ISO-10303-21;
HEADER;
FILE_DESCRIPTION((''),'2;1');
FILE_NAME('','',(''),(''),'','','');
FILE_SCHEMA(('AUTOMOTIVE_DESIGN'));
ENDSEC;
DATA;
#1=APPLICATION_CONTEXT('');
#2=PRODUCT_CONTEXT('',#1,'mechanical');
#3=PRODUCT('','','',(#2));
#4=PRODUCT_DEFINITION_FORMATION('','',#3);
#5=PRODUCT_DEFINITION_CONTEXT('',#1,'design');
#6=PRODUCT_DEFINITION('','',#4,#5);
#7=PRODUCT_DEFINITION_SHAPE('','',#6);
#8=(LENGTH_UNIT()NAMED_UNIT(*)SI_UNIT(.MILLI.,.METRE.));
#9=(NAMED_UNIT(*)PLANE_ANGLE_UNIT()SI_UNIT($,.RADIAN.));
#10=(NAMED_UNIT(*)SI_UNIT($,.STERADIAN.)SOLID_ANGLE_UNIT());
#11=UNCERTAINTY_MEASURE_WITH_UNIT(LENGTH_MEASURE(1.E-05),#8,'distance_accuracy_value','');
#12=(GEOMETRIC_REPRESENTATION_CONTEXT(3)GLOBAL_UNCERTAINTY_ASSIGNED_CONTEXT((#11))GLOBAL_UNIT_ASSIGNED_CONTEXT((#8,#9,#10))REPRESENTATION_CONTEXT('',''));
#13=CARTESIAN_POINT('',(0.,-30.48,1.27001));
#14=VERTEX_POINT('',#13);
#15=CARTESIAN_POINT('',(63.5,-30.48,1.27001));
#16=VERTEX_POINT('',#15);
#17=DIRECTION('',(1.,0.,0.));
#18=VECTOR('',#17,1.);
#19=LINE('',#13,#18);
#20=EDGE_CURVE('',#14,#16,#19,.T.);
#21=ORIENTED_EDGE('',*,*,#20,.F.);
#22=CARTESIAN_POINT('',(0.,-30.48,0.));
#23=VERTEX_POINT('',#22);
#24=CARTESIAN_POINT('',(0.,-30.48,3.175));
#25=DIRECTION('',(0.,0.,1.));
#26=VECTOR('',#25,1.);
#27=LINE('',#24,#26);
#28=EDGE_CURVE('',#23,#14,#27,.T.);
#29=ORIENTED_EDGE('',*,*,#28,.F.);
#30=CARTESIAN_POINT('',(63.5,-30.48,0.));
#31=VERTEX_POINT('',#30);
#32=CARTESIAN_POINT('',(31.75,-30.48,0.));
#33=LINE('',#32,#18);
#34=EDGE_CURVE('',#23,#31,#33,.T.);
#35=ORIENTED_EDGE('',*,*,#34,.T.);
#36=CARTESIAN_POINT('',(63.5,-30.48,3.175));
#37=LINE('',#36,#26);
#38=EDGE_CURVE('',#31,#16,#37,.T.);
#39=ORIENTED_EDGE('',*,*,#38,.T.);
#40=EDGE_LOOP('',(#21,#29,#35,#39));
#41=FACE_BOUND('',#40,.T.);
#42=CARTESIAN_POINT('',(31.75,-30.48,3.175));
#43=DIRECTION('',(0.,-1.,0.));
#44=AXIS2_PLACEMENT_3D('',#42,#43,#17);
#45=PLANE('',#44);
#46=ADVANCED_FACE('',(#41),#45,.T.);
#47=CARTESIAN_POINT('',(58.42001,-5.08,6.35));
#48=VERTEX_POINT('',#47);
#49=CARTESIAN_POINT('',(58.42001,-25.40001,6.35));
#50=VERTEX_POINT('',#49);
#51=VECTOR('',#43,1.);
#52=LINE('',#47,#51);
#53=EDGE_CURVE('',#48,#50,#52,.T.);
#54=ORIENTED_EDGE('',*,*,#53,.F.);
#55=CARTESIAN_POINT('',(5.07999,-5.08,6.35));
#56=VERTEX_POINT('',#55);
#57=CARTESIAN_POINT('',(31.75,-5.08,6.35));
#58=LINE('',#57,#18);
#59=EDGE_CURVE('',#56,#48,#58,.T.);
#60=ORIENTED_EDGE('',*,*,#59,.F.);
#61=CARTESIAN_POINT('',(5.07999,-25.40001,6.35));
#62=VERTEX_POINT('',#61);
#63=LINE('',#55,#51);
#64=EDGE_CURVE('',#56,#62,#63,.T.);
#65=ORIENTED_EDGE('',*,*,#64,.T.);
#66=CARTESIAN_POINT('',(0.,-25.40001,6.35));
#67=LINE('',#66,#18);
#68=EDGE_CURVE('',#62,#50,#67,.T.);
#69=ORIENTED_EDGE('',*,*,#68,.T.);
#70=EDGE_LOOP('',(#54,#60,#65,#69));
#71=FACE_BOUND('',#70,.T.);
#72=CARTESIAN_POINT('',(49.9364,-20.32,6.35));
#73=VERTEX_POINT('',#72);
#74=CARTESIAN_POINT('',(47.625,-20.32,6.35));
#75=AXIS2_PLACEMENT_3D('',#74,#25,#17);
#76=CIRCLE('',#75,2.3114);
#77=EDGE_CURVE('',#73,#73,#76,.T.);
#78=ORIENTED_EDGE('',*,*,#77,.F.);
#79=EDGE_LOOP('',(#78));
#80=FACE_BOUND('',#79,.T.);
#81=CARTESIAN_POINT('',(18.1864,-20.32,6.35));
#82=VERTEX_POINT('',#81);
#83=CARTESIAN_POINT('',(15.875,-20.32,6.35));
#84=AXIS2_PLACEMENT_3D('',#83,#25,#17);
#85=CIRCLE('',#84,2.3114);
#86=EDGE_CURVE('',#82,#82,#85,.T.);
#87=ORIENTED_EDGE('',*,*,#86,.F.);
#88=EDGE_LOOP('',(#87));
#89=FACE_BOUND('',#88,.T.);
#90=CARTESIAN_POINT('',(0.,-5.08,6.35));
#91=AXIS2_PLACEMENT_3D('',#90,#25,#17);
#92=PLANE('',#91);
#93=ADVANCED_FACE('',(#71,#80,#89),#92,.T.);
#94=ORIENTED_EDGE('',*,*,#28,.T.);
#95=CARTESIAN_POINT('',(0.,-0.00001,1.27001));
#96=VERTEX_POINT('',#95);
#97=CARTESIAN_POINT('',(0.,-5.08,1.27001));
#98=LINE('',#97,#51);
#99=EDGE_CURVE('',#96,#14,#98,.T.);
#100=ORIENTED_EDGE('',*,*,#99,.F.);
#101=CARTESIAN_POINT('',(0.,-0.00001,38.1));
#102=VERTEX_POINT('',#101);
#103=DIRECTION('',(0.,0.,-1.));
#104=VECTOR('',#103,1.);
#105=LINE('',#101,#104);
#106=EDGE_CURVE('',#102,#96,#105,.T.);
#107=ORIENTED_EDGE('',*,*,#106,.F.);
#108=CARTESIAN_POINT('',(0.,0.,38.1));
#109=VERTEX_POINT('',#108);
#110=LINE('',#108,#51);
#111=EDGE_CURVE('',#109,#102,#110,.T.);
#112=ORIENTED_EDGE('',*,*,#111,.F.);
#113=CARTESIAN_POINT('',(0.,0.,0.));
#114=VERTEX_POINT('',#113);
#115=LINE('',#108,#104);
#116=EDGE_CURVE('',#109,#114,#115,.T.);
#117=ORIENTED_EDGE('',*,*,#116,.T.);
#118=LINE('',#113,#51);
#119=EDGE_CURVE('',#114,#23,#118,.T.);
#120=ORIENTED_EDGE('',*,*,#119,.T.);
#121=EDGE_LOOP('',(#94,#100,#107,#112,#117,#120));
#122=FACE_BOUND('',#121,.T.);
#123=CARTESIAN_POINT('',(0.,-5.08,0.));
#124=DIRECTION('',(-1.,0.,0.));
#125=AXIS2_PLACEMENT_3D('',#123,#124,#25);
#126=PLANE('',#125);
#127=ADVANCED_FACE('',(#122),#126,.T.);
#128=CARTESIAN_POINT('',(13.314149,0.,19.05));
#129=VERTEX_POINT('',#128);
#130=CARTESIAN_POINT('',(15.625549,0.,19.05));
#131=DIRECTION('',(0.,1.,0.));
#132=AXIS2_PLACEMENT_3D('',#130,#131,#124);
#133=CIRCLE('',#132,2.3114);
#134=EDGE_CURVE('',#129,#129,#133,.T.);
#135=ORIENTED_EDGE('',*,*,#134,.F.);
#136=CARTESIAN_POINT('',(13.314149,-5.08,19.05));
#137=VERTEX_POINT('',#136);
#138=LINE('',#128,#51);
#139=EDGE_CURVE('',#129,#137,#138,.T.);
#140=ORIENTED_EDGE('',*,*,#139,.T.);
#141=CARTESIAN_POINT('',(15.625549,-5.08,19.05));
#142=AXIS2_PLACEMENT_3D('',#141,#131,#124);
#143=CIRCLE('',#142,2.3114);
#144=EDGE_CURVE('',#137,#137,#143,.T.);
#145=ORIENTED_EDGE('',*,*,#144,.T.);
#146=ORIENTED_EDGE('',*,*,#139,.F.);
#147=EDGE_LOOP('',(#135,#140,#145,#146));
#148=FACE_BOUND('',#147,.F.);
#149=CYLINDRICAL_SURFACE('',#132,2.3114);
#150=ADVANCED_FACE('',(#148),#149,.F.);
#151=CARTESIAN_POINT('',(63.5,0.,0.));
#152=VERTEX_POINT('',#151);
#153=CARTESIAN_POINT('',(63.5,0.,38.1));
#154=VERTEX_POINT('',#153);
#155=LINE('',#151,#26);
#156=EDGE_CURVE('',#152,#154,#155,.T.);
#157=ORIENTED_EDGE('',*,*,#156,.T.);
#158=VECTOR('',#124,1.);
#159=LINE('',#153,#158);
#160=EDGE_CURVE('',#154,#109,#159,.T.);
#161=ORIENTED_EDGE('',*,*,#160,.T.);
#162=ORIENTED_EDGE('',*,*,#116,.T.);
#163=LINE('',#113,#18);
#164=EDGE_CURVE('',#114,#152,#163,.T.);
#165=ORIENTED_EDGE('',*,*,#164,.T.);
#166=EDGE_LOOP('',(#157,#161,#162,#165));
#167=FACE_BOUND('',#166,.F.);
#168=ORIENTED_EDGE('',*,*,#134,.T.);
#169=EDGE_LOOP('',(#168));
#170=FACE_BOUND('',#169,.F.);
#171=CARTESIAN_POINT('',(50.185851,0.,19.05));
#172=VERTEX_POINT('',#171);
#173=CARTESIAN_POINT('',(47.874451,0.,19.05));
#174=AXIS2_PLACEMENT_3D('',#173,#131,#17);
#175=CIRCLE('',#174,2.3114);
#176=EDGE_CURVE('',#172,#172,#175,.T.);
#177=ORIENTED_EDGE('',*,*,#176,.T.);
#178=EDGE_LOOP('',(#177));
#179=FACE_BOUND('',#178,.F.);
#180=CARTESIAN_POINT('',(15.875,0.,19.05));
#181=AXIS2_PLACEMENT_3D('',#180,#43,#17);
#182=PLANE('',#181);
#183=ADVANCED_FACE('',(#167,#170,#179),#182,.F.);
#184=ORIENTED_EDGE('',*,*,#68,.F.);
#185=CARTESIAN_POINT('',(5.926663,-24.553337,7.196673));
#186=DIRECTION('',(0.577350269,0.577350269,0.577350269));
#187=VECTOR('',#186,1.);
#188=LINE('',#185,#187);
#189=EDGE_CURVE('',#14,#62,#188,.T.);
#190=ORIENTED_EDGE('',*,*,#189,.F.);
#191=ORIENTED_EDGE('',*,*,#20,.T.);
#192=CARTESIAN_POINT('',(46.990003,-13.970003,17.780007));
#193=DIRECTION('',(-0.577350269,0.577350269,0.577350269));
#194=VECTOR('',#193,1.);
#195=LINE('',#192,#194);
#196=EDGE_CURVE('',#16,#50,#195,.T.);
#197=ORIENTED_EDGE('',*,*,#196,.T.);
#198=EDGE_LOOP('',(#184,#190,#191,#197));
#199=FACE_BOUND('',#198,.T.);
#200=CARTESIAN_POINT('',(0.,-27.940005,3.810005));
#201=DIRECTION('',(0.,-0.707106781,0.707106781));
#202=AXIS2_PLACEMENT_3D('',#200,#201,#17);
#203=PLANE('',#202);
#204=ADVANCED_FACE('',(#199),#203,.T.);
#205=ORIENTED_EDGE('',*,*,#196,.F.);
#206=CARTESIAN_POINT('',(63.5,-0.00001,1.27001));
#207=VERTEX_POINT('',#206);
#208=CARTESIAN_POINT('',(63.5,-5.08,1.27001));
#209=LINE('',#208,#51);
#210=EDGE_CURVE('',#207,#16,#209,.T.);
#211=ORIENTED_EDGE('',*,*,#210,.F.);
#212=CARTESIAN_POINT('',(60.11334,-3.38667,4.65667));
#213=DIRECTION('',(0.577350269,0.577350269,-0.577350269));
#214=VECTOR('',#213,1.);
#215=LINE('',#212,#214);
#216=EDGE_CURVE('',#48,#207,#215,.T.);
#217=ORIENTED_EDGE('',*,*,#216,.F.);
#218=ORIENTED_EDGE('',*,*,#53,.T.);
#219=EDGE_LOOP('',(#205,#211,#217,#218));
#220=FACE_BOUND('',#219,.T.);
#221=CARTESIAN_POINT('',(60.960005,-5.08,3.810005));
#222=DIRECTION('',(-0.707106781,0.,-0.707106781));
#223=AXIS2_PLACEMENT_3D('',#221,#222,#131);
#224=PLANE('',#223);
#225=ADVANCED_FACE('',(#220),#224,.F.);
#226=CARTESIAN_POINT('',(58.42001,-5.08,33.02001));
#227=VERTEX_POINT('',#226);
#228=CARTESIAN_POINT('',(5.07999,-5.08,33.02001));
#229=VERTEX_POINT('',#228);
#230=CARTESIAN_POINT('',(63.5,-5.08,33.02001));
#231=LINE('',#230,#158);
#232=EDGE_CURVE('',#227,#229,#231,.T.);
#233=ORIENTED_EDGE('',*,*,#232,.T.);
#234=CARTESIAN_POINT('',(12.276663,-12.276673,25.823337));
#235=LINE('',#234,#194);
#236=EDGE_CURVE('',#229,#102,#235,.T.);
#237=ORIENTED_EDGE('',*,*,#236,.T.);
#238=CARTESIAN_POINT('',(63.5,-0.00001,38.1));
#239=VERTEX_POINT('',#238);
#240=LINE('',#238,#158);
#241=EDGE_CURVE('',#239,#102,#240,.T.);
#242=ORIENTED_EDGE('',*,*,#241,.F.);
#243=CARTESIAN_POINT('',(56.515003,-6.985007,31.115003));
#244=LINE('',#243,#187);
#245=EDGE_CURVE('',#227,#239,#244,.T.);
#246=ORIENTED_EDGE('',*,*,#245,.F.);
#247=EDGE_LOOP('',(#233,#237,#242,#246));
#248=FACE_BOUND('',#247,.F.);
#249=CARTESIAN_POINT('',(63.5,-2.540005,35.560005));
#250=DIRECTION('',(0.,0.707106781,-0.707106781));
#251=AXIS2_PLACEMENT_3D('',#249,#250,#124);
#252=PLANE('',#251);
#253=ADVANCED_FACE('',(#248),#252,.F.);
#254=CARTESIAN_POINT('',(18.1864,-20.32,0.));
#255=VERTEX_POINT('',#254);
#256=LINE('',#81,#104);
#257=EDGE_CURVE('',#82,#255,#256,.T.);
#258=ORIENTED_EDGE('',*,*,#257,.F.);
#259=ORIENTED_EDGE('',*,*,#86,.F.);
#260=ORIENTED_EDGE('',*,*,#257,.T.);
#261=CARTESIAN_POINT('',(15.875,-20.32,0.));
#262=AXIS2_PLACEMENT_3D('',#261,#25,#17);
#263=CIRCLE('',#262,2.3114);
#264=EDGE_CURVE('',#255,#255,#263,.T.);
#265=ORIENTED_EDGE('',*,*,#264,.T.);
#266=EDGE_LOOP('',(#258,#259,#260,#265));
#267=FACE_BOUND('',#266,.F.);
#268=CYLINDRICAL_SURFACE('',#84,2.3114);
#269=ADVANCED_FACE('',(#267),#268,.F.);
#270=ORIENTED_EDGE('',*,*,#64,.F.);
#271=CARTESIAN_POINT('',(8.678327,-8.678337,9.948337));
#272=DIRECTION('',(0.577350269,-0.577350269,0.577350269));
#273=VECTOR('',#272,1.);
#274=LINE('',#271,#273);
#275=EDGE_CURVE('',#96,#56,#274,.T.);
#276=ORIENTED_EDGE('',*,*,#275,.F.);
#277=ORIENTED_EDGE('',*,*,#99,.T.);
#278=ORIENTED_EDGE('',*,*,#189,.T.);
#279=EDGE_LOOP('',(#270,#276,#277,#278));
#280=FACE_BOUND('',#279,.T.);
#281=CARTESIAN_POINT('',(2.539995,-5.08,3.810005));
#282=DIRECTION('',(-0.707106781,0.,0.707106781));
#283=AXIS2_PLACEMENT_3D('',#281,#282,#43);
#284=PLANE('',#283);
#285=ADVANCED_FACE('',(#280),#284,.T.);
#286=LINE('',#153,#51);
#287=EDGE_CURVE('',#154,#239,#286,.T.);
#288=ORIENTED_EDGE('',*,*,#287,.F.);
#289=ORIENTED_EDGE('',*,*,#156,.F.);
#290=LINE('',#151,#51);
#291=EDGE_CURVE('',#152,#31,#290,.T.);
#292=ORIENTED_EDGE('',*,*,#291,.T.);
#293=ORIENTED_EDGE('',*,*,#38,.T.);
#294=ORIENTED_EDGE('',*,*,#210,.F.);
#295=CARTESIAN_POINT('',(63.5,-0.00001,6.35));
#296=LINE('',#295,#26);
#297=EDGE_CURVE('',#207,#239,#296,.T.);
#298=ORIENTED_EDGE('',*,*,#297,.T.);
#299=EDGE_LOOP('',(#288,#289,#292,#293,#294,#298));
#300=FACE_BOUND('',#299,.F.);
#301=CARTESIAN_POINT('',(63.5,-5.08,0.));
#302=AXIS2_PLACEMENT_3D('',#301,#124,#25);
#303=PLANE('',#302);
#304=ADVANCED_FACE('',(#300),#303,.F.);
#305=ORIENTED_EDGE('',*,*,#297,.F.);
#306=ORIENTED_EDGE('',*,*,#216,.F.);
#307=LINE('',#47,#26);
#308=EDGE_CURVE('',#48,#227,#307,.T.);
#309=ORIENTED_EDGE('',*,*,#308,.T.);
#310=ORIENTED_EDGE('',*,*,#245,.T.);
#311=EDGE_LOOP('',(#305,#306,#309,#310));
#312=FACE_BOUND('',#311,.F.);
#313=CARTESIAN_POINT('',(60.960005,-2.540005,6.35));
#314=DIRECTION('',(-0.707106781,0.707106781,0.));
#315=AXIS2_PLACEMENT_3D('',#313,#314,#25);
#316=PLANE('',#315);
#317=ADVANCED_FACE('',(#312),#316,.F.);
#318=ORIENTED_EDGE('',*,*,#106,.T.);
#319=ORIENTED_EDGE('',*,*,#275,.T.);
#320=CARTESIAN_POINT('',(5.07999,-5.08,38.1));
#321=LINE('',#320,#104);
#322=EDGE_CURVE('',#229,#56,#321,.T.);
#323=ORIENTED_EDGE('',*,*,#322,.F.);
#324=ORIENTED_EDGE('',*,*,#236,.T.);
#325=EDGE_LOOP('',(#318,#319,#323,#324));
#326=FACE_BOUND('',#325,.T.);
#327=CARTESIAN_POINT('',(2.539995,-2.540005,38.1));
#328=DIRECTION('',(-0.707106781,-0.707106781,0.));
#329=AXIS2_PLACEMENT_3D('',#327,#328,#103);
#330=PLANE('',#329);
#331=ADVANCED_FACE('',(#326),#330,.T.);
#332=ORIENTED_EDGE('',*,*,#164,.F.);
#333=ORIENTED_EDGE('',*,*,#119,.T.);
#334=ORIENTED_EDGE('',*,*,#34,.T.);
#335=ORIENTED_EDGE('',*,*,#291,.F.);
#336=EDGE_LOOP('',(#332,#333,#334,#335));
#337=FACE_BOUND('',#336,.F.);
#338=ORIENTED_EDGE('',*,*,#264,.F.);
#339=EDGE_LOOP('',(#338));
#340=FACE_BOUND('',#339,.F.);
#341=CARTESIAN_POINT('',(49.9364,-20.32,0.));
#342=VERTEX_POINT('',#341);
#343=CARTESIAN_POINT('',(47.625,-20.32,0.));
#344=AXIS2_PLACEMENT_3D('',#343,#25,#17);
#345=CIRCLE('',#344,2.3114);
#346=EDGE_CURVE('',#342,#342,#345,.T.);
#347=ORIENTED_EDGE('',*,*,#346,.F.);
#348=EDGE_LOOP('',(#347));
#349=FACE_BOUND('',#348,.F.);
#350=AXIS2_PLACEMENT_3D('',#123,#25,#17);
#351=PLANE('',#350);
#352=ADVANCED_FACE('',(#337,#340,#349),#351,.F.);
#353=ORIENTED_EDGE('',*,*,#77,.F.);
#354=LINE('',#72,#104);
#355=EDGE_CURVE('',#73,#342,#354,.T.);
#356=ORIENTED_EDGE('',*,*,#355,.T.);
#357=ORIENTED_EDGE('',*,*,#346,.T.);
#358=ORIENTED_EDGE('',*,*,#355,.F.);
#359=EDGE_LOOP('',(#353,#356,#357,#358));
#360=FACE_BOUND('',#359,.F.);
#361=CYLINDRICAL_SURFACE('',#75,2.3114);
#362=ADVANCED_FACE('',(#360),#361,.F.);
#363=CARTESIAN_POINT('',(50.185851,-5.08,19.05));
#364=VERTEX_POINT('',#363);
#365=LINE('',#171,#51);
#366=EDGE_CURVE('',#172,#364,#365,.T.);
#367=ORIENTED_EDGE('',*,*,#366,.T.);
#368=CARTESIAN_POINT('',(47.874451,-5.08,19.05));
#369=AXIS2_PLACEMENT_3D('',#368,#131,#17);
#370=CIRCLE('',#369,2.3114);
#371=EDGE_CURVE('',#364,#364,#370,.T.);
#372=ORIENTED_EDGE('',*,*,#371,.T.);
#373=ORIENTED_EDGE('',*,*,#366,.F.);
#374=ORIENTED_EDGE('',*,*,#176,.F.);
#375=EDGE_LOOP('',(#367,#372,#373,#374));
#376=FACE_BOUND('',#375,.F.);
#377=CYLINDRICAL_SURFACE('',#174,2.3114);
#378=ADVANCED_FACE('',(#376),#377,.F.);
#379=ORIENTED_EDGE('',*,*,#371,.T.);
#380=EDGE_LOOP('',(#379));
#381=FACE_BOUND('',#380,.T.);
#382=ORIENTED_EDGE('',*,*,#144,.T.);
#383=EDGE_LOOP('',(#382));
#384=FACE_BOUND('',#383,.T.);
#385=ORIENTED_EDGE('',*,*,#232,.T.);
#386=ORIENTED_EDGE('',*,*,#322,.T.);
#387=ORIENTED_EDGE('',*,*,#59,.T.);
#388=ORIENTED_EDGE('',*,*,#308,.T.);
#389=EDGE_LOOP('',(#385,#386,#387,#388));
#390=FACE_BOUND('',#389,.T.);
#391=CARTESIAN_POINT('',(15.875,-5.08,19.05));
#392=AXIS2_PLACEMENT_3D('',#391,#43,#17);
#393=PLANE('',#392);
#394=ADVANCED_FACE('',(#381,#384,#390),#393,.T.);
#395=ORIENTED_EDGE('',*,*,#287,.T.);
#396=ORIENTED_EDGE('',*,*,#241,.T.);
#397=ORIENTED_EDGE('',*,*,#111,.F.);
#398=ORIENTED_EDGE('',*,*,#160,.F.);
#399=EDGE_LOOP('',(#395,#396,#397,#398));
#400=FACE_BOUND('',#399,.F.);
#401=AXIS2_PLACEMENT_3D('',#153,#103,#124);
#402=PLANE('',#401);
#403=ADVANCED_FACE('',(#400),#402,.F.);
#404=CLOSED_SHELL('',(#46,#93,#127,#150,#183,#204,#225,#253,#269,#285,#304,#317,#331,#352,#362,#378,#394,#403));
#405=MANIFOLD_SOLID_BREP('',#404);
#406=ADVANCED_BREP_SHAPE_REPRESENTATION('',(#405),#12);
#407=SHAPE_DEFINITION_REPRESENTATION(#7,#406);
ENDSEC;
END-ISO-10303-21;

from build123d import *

# Parameters (mm, degrees)
F1_DEPTH = 5.08
F2_W     = 63.5
F2_H     = 6.35
F3_DEPTH = 25.4
F4_R     = 2.3114
F5_DEPTH = 25.4
F6_SIZE  = 5.07999


# Not quite as in the source:
# - a fillet or chamfer is up to 0.001 mm smaller than in the source, because OpenCascade refuses the exact size


with BuildPart() as f1:
    # F0 (on Front) → F1 (new body)
    with BuildSketch(Plane.XZ):
        Polygon((0, 19.05), (0, 0), (31.75, 0), (31.75, 38.1), (30.7521958955, 38.1), (0, 38.1), align=None)
        with BuildLine():
            ThreePointArc((17.9369489739, 19.05), (15.6255489739, 16.7386), (13.3141489739, 19.05))
            ThreePointArc((13.3141489739, 19.05), (15.6255489739, 21.3614), (17.9369489739, 19.05))
        make_face(mode=Mode.SUBTRACT)
        Polygon((31.75, 38.1), (31.75, 0), (63.5, 0), (63.5, 19.05), (63.5, 38.1), (32.7478041045, 38.1), align=None)
        with BuildLine():
            ThreePointArc((45.5630510261, 19.05), (47.8744510261, 21.3614), (50.1858510261, 19.05))
            ThreePointArc((50.1858510261, 19.05), (47.8744510261, 16.7386), (45.5630510261, 19.05))
        make_face(mode=Mode.SUBTRACT)
    extrude(amount=F1_DEPTH)

    # F2 (on face) → F3 (join)
    with BuildSketch(Plane.XZ.offset(5.08)):
        with Locations((31.75, 3.175)):
            Rectangle(F2_W, F2_H)
    extrude(amount=F3_DEPTH)

    # F4 (on face) → F5 (cut)
    with BuildSketch(Plane.XY.offset(6.35)):
        with Locations((15.875, -20.32)):
            Circle(F4_R)
        with Locations((47.625, -20.32)):
            Circle(F4_R)
    extrude(amount=-F5_DEPTH, mode=Mode.SUBTRACT)

    # F6 (size 5.08 in the source; OpenCascade refuses exactly that, so slightly less here)
    f6_edges = [f1.edges().sort_by_distance(p)[0] for p in [
        (31.75, -5.08, 38.1),
        (31.75, -30.48, 6.35),
        (0, -17.78, 6.35),
        (63.5, -17.78, 6.35),
        (0, -5.08, 22.225),
        (63.5, -5.08, 22.225),
    ]]
    chamfer(f6_edges, length=F6_SIZE)


solid = f1.part
